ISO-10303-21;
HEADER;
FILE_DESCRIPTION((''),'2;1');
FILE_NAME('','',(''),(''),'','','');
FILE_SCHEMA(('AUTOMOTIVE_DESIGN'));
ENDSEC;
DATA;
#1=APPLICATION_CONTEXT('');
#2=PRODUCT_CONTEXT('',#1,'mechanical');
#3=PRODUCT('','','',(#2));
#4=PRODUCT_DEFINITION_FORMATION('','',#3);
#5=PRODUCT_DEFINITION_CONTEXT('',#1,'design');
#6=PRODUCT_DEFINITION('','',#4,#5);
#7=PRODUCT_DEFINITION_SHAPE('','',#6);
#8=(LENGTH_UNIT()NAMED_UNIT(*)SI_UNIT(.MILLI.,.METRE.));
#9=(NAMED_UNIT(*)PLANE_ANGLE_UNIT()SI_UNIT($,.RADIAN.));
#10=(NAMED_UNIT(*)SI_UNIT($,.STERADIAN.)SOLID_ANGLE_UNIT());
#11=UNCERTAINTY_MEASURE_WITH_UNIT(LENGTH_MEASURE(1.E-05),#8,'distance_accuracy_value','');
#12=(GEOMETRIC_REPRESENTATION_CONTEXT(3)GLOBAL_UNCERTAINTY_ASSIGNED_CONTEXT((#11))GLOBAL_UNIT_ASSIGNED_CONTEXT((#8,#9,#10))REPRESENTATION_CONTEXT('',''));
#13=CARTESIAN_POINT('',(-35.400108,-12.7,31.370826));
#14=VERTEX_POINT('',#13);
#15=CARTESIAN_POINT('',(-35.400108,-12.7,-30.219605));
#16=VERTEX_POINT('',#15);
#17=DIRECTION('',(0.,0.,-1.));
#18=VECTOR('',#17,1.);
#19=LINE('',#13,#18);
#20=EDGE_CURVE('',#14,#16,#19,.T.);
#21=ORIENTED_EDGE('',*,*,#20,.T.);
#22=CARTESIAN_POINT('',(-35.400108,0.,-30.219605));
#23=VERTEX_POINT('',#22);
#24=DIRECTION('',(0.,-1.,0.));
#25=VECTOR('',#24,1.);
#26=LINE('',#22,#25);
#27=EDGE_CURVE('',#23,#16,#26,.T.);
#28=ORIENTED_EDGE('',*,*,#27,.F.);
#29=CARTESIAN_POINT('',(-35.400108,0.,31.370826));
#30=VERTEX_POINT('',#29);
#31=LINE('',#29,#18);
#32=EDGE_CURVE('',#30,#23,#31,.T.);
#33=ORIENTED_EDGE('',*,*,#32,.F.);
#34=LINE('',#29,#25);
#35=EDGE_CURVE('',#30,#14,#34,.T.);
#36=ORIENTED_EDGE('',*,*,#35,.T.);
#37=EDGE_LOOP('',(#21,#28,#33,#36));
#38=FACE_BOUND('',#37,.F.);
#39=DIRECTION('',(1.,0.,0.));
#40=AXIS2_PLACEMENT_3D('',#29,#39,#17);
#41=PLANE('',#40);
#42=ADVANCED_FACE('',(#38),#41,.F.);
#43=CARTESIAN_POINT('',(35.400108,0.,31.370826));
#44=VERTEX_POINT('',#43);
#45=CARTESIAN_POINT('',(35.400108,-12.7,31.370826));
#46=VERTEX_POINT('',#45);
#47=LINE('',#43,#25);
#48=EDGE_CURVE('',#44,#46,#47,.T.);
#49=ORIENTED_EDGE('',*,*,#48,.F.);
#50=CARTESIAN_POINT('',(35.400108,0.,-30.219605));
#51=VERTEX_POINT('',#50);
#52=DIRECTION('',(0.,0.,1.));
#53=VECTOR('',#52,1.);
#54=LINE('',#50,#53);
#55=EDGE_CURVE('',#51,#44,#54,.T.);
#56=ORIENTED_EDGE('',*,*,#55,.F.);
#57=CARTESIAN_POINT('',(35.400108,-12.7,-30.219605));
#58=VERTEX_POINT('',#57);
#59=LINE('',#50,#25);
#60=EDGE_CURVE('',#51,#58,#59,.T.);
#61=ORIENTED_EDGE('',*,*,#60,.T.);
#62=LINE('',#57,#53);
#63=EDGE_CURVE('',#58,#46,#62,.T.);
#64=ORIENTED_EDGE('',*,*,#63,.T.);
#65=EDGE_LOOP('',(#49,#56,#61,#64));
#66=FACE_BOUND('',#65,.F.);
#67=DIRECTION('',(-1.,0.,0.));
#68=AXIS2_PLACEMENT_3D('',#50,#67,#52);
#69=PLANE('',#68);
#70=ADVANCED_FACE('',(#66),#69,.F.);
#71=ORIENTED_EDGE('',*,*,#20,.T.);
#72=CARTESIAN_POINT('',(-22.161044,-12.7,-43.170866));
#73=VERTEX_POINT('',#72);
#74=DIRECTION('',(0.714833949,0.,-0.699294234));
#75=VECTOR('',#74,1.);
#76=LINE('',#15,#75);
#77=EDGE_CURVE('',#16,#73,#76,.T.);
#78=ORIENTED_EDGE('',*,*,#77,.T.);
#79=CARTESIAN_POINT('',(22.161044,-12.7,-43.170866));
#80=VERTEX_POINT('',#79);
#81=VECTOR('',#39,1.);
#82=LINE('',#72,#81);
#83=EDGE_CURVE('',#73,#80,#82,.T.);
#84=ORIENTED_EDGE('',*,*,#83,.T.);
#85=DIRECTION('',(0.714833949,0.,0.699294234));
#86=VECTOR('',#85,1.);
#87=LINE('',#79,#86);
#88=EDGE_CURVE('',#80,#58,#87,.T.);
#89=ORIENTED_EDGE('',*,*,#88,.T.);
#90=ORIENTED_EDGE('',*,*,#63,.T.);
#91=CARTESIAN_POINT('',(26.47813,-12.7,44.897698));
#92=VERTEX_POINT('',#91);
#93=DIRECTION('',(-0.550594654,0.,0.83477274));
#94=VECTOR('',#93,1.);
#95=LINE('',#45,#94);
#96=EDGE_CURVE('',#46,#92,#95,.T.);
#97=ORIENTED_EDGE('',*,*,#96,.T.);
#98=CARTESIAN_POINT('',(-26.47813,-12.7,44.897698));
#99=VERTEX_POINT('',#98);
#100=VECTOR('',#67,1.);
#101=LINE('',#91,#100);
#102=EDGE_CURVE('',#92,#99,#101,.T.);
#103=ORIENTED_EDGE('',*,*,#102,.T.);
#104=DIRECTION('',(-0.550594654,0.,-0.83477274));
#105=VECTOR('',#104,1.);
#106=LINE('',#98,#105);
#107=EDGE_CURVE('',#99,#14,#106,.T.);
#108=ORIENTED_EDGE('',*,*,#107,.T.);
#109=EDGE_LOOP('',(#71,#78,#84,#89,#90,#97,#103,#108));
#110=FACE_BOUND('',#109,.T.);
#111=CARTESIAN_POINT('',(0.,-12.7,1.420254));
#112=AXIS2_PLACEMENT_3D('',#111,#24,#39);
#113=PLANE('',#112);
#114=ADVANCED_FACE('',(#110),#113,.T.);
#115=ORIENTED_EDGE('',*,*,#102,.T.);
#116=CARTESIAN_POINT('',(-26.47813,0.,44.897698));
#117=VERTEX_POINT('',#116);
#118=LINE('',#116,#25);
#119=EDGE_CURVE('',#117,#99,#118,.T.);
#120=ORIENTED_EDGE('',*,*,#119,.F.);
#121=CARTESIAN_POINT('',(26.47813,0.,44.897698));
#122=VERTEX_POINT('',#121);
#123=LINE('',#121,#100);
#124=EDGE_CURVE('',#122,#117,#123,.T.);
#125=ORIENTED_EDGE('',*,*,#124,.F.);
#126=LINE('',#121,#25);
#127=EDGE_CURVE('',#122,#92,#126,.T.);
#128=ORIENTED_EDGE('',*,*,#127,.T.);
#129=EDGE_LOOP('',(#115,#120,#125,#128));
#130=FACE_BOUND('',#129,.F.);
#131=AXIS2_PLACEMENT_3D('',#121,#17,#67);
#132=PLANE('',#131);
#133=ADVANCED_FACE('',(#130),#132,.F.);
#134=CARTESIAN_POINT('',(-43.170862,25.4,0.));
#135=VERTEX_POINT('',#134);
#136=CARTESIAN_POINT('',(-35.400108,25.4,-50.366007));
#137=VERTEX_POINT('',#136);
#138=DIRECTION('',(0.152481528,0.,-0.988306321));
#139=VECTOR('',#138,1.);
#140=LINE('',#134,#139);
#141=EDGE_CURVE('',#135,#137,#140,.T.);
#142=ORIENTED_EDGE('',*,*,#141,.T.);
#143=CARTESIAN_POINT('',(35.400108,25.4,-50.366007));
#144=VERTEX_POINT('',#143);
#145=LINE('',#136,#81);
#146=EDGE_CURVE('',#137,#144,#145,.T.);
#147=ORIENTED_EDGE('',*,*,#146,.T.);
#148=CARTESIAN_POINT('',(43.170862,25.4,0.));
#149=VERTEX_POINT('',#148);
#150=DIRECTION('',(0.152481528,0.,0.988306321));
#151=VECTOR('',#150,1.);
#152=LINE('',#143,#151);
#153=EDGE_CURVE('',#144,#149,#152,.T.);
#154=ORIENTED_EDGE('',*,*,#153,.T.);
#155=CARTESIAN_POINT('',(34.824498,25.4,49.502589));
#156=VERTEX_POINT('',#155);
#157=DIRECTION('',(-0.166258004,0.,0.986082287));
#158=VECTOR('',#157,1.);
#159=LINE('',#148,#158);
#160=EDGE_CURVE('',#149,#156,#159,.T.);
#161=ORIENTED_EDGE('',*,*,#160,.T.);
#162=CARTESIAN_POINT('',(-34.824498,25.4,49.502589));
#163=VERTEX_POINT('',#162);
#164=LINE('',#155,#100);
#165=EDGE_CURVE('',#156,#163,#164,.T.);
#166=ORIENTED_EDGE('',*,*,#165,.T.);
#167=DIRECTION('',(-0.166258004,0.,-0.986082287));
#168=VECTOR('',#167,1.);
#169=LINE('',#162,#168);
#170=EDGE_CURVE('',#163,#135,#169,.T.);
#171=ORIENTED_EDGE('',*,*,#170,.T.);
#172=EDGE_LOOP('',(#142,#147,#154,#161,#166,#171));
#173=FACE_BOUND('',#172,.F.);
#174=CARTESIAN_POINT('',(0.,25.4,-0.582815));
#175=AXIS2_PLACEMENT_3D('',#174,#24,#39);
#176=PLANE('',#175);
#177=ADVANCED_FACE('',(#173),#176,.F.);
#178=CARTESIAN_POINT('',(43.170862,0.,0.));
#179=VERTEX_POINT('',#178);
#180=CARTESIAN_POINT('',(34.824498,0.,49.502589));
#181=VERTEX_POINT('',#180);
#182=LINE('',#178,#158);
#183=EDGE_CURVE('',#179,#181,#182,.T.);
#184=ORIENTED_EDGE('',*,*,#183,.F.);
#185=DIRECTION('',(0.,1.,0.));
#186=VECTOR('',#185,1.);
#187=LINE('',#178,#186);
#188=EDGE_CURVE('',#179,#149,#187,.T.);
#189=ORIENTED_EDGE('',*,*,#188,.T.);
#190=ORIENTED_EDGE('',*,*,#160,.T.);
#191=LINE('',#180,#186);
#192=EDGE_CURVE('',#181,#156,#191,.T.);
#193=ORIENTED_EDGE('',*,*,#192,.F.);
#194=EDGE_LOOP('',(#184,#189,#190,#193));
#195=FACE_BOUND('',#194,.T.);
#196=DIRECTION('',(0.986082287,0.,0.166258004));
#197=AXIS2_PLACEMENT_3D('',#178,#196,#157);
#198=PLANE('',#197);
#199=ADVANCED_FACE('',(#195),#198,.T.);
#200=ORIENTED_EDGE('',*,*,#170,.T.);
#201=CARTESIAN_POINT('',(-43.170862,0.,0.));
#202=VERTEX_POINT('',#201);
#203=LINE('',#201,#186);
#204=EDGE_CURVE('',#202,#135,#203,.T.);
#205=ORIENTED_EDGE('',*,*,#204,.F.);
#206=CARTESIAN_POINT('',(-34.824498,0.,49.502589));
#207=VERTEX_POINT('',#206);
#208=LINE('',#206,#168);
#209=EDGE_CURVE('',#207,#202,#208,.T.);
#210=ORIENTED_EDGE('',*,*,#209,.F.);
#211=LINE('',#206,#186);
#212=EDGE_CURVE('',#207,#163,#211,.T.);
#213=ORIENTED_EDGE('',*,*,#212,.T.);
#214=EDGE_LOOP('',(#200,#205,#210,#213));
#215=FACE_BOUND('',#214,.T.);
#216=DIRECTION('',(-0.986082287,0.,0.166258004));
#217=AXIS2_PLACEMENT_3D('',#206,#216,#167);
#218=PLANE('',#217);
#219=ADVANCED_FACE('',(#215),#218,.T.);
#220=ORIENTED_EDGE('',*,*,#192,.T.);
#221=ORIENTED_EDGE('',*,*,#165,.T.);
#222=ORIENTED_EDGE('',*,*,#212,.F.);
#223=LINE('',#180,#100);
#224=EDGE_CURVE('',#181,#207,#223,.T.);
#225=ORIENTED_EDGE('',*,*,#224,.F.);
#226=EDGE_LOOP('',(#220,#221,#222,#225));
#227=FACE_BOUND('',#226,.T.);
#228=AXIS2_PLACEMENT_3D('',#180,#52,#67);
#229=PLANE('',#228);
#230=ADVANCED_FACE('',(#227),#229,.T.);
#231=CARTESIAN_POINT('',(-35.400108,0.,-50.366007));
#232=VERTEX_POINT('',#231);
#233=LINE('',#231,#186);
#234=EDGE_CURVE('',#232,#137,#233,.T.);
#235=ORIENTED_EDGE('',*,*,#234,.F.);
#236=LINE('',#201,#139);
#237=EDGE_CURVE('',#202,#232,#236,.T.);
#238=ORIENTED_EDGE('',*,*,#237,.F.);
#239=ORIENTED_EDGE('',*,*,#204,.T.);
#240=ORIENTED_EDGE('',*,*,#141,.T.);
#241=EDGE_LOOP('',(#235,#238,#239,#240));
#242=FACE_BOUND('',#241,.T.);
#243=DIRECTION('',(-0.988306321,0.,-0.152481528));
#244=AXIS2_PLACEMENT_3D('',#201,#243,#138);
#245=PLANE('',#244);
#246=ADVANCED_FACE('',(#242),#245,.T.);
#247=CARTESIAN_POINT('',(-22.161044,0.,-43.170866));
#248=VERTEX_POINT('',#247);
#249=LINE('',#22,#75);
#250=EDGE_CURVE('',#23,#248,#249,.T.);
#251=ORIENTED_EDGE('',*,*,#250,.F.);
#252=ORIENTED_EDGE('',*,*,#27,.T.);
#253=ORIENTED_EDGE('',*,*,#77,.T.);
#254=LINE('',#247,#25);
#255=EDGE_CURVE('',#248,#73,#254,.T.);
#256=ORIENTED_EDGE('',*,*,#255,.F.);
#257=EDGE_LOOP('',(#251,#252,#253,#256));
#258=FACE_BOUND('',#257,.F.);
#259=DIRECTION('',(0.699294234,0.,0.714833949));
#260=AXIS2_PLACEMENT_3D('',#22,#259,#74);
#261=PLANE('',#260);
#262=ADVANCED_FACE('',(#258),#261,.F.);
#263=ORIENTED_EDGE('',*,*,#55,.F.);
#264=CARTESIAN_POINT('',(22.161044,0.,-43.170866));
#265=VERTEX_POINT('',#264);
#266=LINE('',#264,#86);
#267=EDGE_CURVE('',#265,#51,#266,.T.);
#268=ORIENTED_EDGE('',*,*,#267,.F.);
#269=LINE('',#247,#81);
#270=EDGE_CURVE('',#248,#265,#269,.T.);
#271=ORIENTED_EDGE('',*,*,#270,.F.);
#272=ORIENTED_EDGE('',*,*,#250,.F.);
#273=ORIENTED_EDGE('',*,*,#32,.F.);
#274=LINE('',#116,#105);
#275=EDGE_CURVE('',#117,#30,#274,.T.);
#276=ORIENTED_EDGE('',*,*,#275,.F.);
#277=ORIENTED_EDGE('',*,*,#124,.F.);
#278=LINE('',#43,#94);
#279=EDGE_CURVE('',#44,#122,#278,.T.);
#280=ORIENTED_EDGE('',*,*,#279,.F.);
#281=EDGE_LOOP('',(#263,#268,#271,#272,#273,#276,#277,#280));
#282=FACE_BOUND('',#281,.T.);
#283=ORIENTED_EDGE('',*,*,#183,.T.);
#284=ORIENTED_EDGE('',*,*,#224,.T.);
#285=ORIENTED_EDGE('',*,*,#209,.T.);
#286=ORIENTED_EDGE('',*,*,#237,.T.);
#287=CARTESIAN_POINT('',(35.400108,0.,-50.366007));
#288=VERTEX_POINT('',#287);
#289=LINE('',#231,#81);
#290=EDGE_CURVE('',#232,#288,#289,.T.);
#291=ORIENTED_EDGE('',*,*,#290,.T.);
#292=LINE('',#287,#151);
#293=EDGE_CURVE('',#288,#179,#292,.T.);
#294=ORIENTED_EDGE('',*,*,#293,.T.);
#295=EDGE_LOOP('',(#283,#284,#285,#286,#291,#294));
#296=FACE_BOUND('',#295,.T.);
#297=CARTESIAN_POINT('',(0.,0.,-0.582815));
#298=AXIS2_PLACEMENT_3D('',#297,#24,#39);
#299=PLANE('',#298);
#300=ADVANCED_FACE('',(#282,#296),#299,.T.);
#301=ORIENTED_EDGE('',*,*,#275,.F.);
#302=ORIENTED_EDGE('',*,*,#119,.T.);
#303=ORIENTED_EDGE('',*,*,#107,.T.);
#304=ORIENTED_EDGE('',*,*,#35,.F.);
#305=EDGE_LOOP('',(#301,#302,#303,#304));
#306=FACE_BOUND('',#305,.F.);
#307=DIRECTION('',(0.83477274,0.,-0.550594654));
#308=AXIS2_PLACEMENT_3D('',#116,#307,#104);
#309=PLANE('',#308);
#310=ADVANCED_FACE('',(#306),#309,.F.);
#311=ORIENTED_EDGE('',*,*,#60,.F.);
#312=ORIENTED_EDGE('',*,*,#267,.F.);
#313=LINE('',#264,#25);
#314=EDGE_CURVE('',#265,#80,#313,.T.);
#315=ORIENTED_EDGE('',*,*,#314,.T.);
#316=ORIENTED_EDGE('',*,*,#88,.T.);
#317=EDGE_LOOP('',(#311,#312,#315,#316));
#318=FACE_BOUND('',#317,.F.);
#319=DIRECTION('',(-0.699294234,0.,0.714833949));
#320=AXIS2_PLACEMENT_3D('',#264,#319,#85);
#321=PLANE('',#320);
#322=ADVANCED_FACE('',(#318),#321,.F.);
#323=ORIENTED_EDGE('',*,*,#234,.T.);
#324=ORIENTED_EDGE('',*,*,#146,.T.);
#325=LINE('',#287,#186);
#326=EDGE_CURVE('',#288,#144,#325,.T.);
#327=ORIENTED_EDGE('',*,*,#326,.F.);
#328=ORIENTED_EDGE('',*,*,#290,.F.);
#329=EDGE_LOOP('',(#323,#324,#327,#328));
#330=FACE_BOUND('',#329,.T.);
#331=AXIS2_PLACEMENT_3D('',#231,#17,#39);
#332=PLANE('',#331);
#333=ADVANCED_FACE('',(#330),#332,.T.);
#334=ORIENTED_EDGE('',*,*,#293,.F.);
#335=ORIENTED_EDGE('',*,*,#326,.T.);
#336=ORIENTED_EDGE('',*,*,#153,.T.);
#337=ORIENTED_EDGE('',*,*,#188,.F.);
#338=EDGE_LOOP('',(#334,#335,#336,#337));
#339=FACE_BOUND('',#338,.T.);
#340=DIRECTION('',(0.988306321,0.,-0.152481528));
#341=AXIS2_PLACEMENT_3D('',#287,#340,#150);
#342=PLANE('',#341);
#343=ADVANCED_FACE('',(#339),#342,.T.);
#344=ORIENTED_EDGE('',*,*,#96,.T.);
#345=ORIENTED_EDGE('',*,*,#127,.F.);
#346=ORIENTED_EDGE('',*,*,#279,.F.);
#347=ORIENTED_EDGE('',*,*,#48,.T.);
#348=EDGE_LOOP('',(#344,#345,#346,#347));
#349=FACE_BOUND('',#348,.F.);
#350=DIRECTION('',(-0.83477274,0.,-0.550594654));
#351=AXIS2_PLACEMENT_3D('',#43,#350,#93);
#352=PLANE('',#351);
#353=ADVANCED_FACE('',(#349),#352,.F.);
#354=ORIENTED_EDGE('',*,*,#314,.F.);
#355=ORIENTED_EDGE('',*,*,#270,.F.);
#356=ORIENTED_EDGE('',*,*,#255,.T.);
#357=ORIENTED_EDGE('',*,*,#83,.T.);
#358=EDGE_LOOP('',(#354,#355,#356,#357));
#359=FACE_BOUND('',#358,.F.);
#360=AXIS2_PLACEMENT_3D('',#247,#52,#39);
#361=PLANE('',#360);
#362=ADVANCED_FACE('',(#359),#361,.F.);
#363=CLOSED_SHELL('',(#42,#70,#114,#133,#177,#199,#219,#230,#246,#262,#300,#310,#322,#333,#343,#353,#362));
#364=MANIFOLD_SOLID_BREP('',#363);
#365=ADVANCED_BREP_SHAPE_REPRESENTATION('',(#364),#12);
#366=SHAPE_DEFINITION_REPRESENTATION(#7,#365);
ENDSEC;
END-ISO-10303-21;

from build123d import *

# Parameters (mm, degrees)
F1_DEPTH = 25.4
F2_DEPTH = 12.7
F4_DEPTH = 25.4


# Not quite as in the source:
# - the program builds the solid bodies; features that only make, move or delete a surface that nothing else refers to are left out


with BuildPart() as f1:
    # F0 (on Front) → F1 (new body)
    with BuildSketch(Plane.XZ):
        Polygon((-22.1610441804, -43.1708656251), (0, -43.1708656251), (22.1610441804, -43.1708656251), (35.4001075029, -30.2196051925), (35.4001075029, 31.3708260655), (26.4781303704, 44.897697866), (0, 44.897697866), (-26.4781303704, 44.897697866), (-35.4001075029, 31.3708260655), (-35.4001075029, -30.2196051925), align=None)
    extrude(amount=F1_DEPTH)

    # F2 (cut): a face of the model
    f2_faces = [f1.faces().sort_by_distance(p)[0] for p in [
        (0, -25.4, 1.2066431814),
    ]]
    extrude(f2_faces, amount=-F2_DEPTH, mode=Mode.SUBTRACT)

    # F3 (on Front) → F4 (join)
    with BuildSketch(Plane.XZ):
        Polygon((34.8244979978, 49.5025888085), (0, 49.5025888085), (-34.8244979978, 49.5025888085), (-43.1708618999, 0), (-35.4001075029, -50.3660067916), (0, -50.3660067916), (35.4001075029, -50.3660067916), (43.1708618999, 0), align=None)
    extrude(amount=-F4_DEPTH)


solid = f1.part
